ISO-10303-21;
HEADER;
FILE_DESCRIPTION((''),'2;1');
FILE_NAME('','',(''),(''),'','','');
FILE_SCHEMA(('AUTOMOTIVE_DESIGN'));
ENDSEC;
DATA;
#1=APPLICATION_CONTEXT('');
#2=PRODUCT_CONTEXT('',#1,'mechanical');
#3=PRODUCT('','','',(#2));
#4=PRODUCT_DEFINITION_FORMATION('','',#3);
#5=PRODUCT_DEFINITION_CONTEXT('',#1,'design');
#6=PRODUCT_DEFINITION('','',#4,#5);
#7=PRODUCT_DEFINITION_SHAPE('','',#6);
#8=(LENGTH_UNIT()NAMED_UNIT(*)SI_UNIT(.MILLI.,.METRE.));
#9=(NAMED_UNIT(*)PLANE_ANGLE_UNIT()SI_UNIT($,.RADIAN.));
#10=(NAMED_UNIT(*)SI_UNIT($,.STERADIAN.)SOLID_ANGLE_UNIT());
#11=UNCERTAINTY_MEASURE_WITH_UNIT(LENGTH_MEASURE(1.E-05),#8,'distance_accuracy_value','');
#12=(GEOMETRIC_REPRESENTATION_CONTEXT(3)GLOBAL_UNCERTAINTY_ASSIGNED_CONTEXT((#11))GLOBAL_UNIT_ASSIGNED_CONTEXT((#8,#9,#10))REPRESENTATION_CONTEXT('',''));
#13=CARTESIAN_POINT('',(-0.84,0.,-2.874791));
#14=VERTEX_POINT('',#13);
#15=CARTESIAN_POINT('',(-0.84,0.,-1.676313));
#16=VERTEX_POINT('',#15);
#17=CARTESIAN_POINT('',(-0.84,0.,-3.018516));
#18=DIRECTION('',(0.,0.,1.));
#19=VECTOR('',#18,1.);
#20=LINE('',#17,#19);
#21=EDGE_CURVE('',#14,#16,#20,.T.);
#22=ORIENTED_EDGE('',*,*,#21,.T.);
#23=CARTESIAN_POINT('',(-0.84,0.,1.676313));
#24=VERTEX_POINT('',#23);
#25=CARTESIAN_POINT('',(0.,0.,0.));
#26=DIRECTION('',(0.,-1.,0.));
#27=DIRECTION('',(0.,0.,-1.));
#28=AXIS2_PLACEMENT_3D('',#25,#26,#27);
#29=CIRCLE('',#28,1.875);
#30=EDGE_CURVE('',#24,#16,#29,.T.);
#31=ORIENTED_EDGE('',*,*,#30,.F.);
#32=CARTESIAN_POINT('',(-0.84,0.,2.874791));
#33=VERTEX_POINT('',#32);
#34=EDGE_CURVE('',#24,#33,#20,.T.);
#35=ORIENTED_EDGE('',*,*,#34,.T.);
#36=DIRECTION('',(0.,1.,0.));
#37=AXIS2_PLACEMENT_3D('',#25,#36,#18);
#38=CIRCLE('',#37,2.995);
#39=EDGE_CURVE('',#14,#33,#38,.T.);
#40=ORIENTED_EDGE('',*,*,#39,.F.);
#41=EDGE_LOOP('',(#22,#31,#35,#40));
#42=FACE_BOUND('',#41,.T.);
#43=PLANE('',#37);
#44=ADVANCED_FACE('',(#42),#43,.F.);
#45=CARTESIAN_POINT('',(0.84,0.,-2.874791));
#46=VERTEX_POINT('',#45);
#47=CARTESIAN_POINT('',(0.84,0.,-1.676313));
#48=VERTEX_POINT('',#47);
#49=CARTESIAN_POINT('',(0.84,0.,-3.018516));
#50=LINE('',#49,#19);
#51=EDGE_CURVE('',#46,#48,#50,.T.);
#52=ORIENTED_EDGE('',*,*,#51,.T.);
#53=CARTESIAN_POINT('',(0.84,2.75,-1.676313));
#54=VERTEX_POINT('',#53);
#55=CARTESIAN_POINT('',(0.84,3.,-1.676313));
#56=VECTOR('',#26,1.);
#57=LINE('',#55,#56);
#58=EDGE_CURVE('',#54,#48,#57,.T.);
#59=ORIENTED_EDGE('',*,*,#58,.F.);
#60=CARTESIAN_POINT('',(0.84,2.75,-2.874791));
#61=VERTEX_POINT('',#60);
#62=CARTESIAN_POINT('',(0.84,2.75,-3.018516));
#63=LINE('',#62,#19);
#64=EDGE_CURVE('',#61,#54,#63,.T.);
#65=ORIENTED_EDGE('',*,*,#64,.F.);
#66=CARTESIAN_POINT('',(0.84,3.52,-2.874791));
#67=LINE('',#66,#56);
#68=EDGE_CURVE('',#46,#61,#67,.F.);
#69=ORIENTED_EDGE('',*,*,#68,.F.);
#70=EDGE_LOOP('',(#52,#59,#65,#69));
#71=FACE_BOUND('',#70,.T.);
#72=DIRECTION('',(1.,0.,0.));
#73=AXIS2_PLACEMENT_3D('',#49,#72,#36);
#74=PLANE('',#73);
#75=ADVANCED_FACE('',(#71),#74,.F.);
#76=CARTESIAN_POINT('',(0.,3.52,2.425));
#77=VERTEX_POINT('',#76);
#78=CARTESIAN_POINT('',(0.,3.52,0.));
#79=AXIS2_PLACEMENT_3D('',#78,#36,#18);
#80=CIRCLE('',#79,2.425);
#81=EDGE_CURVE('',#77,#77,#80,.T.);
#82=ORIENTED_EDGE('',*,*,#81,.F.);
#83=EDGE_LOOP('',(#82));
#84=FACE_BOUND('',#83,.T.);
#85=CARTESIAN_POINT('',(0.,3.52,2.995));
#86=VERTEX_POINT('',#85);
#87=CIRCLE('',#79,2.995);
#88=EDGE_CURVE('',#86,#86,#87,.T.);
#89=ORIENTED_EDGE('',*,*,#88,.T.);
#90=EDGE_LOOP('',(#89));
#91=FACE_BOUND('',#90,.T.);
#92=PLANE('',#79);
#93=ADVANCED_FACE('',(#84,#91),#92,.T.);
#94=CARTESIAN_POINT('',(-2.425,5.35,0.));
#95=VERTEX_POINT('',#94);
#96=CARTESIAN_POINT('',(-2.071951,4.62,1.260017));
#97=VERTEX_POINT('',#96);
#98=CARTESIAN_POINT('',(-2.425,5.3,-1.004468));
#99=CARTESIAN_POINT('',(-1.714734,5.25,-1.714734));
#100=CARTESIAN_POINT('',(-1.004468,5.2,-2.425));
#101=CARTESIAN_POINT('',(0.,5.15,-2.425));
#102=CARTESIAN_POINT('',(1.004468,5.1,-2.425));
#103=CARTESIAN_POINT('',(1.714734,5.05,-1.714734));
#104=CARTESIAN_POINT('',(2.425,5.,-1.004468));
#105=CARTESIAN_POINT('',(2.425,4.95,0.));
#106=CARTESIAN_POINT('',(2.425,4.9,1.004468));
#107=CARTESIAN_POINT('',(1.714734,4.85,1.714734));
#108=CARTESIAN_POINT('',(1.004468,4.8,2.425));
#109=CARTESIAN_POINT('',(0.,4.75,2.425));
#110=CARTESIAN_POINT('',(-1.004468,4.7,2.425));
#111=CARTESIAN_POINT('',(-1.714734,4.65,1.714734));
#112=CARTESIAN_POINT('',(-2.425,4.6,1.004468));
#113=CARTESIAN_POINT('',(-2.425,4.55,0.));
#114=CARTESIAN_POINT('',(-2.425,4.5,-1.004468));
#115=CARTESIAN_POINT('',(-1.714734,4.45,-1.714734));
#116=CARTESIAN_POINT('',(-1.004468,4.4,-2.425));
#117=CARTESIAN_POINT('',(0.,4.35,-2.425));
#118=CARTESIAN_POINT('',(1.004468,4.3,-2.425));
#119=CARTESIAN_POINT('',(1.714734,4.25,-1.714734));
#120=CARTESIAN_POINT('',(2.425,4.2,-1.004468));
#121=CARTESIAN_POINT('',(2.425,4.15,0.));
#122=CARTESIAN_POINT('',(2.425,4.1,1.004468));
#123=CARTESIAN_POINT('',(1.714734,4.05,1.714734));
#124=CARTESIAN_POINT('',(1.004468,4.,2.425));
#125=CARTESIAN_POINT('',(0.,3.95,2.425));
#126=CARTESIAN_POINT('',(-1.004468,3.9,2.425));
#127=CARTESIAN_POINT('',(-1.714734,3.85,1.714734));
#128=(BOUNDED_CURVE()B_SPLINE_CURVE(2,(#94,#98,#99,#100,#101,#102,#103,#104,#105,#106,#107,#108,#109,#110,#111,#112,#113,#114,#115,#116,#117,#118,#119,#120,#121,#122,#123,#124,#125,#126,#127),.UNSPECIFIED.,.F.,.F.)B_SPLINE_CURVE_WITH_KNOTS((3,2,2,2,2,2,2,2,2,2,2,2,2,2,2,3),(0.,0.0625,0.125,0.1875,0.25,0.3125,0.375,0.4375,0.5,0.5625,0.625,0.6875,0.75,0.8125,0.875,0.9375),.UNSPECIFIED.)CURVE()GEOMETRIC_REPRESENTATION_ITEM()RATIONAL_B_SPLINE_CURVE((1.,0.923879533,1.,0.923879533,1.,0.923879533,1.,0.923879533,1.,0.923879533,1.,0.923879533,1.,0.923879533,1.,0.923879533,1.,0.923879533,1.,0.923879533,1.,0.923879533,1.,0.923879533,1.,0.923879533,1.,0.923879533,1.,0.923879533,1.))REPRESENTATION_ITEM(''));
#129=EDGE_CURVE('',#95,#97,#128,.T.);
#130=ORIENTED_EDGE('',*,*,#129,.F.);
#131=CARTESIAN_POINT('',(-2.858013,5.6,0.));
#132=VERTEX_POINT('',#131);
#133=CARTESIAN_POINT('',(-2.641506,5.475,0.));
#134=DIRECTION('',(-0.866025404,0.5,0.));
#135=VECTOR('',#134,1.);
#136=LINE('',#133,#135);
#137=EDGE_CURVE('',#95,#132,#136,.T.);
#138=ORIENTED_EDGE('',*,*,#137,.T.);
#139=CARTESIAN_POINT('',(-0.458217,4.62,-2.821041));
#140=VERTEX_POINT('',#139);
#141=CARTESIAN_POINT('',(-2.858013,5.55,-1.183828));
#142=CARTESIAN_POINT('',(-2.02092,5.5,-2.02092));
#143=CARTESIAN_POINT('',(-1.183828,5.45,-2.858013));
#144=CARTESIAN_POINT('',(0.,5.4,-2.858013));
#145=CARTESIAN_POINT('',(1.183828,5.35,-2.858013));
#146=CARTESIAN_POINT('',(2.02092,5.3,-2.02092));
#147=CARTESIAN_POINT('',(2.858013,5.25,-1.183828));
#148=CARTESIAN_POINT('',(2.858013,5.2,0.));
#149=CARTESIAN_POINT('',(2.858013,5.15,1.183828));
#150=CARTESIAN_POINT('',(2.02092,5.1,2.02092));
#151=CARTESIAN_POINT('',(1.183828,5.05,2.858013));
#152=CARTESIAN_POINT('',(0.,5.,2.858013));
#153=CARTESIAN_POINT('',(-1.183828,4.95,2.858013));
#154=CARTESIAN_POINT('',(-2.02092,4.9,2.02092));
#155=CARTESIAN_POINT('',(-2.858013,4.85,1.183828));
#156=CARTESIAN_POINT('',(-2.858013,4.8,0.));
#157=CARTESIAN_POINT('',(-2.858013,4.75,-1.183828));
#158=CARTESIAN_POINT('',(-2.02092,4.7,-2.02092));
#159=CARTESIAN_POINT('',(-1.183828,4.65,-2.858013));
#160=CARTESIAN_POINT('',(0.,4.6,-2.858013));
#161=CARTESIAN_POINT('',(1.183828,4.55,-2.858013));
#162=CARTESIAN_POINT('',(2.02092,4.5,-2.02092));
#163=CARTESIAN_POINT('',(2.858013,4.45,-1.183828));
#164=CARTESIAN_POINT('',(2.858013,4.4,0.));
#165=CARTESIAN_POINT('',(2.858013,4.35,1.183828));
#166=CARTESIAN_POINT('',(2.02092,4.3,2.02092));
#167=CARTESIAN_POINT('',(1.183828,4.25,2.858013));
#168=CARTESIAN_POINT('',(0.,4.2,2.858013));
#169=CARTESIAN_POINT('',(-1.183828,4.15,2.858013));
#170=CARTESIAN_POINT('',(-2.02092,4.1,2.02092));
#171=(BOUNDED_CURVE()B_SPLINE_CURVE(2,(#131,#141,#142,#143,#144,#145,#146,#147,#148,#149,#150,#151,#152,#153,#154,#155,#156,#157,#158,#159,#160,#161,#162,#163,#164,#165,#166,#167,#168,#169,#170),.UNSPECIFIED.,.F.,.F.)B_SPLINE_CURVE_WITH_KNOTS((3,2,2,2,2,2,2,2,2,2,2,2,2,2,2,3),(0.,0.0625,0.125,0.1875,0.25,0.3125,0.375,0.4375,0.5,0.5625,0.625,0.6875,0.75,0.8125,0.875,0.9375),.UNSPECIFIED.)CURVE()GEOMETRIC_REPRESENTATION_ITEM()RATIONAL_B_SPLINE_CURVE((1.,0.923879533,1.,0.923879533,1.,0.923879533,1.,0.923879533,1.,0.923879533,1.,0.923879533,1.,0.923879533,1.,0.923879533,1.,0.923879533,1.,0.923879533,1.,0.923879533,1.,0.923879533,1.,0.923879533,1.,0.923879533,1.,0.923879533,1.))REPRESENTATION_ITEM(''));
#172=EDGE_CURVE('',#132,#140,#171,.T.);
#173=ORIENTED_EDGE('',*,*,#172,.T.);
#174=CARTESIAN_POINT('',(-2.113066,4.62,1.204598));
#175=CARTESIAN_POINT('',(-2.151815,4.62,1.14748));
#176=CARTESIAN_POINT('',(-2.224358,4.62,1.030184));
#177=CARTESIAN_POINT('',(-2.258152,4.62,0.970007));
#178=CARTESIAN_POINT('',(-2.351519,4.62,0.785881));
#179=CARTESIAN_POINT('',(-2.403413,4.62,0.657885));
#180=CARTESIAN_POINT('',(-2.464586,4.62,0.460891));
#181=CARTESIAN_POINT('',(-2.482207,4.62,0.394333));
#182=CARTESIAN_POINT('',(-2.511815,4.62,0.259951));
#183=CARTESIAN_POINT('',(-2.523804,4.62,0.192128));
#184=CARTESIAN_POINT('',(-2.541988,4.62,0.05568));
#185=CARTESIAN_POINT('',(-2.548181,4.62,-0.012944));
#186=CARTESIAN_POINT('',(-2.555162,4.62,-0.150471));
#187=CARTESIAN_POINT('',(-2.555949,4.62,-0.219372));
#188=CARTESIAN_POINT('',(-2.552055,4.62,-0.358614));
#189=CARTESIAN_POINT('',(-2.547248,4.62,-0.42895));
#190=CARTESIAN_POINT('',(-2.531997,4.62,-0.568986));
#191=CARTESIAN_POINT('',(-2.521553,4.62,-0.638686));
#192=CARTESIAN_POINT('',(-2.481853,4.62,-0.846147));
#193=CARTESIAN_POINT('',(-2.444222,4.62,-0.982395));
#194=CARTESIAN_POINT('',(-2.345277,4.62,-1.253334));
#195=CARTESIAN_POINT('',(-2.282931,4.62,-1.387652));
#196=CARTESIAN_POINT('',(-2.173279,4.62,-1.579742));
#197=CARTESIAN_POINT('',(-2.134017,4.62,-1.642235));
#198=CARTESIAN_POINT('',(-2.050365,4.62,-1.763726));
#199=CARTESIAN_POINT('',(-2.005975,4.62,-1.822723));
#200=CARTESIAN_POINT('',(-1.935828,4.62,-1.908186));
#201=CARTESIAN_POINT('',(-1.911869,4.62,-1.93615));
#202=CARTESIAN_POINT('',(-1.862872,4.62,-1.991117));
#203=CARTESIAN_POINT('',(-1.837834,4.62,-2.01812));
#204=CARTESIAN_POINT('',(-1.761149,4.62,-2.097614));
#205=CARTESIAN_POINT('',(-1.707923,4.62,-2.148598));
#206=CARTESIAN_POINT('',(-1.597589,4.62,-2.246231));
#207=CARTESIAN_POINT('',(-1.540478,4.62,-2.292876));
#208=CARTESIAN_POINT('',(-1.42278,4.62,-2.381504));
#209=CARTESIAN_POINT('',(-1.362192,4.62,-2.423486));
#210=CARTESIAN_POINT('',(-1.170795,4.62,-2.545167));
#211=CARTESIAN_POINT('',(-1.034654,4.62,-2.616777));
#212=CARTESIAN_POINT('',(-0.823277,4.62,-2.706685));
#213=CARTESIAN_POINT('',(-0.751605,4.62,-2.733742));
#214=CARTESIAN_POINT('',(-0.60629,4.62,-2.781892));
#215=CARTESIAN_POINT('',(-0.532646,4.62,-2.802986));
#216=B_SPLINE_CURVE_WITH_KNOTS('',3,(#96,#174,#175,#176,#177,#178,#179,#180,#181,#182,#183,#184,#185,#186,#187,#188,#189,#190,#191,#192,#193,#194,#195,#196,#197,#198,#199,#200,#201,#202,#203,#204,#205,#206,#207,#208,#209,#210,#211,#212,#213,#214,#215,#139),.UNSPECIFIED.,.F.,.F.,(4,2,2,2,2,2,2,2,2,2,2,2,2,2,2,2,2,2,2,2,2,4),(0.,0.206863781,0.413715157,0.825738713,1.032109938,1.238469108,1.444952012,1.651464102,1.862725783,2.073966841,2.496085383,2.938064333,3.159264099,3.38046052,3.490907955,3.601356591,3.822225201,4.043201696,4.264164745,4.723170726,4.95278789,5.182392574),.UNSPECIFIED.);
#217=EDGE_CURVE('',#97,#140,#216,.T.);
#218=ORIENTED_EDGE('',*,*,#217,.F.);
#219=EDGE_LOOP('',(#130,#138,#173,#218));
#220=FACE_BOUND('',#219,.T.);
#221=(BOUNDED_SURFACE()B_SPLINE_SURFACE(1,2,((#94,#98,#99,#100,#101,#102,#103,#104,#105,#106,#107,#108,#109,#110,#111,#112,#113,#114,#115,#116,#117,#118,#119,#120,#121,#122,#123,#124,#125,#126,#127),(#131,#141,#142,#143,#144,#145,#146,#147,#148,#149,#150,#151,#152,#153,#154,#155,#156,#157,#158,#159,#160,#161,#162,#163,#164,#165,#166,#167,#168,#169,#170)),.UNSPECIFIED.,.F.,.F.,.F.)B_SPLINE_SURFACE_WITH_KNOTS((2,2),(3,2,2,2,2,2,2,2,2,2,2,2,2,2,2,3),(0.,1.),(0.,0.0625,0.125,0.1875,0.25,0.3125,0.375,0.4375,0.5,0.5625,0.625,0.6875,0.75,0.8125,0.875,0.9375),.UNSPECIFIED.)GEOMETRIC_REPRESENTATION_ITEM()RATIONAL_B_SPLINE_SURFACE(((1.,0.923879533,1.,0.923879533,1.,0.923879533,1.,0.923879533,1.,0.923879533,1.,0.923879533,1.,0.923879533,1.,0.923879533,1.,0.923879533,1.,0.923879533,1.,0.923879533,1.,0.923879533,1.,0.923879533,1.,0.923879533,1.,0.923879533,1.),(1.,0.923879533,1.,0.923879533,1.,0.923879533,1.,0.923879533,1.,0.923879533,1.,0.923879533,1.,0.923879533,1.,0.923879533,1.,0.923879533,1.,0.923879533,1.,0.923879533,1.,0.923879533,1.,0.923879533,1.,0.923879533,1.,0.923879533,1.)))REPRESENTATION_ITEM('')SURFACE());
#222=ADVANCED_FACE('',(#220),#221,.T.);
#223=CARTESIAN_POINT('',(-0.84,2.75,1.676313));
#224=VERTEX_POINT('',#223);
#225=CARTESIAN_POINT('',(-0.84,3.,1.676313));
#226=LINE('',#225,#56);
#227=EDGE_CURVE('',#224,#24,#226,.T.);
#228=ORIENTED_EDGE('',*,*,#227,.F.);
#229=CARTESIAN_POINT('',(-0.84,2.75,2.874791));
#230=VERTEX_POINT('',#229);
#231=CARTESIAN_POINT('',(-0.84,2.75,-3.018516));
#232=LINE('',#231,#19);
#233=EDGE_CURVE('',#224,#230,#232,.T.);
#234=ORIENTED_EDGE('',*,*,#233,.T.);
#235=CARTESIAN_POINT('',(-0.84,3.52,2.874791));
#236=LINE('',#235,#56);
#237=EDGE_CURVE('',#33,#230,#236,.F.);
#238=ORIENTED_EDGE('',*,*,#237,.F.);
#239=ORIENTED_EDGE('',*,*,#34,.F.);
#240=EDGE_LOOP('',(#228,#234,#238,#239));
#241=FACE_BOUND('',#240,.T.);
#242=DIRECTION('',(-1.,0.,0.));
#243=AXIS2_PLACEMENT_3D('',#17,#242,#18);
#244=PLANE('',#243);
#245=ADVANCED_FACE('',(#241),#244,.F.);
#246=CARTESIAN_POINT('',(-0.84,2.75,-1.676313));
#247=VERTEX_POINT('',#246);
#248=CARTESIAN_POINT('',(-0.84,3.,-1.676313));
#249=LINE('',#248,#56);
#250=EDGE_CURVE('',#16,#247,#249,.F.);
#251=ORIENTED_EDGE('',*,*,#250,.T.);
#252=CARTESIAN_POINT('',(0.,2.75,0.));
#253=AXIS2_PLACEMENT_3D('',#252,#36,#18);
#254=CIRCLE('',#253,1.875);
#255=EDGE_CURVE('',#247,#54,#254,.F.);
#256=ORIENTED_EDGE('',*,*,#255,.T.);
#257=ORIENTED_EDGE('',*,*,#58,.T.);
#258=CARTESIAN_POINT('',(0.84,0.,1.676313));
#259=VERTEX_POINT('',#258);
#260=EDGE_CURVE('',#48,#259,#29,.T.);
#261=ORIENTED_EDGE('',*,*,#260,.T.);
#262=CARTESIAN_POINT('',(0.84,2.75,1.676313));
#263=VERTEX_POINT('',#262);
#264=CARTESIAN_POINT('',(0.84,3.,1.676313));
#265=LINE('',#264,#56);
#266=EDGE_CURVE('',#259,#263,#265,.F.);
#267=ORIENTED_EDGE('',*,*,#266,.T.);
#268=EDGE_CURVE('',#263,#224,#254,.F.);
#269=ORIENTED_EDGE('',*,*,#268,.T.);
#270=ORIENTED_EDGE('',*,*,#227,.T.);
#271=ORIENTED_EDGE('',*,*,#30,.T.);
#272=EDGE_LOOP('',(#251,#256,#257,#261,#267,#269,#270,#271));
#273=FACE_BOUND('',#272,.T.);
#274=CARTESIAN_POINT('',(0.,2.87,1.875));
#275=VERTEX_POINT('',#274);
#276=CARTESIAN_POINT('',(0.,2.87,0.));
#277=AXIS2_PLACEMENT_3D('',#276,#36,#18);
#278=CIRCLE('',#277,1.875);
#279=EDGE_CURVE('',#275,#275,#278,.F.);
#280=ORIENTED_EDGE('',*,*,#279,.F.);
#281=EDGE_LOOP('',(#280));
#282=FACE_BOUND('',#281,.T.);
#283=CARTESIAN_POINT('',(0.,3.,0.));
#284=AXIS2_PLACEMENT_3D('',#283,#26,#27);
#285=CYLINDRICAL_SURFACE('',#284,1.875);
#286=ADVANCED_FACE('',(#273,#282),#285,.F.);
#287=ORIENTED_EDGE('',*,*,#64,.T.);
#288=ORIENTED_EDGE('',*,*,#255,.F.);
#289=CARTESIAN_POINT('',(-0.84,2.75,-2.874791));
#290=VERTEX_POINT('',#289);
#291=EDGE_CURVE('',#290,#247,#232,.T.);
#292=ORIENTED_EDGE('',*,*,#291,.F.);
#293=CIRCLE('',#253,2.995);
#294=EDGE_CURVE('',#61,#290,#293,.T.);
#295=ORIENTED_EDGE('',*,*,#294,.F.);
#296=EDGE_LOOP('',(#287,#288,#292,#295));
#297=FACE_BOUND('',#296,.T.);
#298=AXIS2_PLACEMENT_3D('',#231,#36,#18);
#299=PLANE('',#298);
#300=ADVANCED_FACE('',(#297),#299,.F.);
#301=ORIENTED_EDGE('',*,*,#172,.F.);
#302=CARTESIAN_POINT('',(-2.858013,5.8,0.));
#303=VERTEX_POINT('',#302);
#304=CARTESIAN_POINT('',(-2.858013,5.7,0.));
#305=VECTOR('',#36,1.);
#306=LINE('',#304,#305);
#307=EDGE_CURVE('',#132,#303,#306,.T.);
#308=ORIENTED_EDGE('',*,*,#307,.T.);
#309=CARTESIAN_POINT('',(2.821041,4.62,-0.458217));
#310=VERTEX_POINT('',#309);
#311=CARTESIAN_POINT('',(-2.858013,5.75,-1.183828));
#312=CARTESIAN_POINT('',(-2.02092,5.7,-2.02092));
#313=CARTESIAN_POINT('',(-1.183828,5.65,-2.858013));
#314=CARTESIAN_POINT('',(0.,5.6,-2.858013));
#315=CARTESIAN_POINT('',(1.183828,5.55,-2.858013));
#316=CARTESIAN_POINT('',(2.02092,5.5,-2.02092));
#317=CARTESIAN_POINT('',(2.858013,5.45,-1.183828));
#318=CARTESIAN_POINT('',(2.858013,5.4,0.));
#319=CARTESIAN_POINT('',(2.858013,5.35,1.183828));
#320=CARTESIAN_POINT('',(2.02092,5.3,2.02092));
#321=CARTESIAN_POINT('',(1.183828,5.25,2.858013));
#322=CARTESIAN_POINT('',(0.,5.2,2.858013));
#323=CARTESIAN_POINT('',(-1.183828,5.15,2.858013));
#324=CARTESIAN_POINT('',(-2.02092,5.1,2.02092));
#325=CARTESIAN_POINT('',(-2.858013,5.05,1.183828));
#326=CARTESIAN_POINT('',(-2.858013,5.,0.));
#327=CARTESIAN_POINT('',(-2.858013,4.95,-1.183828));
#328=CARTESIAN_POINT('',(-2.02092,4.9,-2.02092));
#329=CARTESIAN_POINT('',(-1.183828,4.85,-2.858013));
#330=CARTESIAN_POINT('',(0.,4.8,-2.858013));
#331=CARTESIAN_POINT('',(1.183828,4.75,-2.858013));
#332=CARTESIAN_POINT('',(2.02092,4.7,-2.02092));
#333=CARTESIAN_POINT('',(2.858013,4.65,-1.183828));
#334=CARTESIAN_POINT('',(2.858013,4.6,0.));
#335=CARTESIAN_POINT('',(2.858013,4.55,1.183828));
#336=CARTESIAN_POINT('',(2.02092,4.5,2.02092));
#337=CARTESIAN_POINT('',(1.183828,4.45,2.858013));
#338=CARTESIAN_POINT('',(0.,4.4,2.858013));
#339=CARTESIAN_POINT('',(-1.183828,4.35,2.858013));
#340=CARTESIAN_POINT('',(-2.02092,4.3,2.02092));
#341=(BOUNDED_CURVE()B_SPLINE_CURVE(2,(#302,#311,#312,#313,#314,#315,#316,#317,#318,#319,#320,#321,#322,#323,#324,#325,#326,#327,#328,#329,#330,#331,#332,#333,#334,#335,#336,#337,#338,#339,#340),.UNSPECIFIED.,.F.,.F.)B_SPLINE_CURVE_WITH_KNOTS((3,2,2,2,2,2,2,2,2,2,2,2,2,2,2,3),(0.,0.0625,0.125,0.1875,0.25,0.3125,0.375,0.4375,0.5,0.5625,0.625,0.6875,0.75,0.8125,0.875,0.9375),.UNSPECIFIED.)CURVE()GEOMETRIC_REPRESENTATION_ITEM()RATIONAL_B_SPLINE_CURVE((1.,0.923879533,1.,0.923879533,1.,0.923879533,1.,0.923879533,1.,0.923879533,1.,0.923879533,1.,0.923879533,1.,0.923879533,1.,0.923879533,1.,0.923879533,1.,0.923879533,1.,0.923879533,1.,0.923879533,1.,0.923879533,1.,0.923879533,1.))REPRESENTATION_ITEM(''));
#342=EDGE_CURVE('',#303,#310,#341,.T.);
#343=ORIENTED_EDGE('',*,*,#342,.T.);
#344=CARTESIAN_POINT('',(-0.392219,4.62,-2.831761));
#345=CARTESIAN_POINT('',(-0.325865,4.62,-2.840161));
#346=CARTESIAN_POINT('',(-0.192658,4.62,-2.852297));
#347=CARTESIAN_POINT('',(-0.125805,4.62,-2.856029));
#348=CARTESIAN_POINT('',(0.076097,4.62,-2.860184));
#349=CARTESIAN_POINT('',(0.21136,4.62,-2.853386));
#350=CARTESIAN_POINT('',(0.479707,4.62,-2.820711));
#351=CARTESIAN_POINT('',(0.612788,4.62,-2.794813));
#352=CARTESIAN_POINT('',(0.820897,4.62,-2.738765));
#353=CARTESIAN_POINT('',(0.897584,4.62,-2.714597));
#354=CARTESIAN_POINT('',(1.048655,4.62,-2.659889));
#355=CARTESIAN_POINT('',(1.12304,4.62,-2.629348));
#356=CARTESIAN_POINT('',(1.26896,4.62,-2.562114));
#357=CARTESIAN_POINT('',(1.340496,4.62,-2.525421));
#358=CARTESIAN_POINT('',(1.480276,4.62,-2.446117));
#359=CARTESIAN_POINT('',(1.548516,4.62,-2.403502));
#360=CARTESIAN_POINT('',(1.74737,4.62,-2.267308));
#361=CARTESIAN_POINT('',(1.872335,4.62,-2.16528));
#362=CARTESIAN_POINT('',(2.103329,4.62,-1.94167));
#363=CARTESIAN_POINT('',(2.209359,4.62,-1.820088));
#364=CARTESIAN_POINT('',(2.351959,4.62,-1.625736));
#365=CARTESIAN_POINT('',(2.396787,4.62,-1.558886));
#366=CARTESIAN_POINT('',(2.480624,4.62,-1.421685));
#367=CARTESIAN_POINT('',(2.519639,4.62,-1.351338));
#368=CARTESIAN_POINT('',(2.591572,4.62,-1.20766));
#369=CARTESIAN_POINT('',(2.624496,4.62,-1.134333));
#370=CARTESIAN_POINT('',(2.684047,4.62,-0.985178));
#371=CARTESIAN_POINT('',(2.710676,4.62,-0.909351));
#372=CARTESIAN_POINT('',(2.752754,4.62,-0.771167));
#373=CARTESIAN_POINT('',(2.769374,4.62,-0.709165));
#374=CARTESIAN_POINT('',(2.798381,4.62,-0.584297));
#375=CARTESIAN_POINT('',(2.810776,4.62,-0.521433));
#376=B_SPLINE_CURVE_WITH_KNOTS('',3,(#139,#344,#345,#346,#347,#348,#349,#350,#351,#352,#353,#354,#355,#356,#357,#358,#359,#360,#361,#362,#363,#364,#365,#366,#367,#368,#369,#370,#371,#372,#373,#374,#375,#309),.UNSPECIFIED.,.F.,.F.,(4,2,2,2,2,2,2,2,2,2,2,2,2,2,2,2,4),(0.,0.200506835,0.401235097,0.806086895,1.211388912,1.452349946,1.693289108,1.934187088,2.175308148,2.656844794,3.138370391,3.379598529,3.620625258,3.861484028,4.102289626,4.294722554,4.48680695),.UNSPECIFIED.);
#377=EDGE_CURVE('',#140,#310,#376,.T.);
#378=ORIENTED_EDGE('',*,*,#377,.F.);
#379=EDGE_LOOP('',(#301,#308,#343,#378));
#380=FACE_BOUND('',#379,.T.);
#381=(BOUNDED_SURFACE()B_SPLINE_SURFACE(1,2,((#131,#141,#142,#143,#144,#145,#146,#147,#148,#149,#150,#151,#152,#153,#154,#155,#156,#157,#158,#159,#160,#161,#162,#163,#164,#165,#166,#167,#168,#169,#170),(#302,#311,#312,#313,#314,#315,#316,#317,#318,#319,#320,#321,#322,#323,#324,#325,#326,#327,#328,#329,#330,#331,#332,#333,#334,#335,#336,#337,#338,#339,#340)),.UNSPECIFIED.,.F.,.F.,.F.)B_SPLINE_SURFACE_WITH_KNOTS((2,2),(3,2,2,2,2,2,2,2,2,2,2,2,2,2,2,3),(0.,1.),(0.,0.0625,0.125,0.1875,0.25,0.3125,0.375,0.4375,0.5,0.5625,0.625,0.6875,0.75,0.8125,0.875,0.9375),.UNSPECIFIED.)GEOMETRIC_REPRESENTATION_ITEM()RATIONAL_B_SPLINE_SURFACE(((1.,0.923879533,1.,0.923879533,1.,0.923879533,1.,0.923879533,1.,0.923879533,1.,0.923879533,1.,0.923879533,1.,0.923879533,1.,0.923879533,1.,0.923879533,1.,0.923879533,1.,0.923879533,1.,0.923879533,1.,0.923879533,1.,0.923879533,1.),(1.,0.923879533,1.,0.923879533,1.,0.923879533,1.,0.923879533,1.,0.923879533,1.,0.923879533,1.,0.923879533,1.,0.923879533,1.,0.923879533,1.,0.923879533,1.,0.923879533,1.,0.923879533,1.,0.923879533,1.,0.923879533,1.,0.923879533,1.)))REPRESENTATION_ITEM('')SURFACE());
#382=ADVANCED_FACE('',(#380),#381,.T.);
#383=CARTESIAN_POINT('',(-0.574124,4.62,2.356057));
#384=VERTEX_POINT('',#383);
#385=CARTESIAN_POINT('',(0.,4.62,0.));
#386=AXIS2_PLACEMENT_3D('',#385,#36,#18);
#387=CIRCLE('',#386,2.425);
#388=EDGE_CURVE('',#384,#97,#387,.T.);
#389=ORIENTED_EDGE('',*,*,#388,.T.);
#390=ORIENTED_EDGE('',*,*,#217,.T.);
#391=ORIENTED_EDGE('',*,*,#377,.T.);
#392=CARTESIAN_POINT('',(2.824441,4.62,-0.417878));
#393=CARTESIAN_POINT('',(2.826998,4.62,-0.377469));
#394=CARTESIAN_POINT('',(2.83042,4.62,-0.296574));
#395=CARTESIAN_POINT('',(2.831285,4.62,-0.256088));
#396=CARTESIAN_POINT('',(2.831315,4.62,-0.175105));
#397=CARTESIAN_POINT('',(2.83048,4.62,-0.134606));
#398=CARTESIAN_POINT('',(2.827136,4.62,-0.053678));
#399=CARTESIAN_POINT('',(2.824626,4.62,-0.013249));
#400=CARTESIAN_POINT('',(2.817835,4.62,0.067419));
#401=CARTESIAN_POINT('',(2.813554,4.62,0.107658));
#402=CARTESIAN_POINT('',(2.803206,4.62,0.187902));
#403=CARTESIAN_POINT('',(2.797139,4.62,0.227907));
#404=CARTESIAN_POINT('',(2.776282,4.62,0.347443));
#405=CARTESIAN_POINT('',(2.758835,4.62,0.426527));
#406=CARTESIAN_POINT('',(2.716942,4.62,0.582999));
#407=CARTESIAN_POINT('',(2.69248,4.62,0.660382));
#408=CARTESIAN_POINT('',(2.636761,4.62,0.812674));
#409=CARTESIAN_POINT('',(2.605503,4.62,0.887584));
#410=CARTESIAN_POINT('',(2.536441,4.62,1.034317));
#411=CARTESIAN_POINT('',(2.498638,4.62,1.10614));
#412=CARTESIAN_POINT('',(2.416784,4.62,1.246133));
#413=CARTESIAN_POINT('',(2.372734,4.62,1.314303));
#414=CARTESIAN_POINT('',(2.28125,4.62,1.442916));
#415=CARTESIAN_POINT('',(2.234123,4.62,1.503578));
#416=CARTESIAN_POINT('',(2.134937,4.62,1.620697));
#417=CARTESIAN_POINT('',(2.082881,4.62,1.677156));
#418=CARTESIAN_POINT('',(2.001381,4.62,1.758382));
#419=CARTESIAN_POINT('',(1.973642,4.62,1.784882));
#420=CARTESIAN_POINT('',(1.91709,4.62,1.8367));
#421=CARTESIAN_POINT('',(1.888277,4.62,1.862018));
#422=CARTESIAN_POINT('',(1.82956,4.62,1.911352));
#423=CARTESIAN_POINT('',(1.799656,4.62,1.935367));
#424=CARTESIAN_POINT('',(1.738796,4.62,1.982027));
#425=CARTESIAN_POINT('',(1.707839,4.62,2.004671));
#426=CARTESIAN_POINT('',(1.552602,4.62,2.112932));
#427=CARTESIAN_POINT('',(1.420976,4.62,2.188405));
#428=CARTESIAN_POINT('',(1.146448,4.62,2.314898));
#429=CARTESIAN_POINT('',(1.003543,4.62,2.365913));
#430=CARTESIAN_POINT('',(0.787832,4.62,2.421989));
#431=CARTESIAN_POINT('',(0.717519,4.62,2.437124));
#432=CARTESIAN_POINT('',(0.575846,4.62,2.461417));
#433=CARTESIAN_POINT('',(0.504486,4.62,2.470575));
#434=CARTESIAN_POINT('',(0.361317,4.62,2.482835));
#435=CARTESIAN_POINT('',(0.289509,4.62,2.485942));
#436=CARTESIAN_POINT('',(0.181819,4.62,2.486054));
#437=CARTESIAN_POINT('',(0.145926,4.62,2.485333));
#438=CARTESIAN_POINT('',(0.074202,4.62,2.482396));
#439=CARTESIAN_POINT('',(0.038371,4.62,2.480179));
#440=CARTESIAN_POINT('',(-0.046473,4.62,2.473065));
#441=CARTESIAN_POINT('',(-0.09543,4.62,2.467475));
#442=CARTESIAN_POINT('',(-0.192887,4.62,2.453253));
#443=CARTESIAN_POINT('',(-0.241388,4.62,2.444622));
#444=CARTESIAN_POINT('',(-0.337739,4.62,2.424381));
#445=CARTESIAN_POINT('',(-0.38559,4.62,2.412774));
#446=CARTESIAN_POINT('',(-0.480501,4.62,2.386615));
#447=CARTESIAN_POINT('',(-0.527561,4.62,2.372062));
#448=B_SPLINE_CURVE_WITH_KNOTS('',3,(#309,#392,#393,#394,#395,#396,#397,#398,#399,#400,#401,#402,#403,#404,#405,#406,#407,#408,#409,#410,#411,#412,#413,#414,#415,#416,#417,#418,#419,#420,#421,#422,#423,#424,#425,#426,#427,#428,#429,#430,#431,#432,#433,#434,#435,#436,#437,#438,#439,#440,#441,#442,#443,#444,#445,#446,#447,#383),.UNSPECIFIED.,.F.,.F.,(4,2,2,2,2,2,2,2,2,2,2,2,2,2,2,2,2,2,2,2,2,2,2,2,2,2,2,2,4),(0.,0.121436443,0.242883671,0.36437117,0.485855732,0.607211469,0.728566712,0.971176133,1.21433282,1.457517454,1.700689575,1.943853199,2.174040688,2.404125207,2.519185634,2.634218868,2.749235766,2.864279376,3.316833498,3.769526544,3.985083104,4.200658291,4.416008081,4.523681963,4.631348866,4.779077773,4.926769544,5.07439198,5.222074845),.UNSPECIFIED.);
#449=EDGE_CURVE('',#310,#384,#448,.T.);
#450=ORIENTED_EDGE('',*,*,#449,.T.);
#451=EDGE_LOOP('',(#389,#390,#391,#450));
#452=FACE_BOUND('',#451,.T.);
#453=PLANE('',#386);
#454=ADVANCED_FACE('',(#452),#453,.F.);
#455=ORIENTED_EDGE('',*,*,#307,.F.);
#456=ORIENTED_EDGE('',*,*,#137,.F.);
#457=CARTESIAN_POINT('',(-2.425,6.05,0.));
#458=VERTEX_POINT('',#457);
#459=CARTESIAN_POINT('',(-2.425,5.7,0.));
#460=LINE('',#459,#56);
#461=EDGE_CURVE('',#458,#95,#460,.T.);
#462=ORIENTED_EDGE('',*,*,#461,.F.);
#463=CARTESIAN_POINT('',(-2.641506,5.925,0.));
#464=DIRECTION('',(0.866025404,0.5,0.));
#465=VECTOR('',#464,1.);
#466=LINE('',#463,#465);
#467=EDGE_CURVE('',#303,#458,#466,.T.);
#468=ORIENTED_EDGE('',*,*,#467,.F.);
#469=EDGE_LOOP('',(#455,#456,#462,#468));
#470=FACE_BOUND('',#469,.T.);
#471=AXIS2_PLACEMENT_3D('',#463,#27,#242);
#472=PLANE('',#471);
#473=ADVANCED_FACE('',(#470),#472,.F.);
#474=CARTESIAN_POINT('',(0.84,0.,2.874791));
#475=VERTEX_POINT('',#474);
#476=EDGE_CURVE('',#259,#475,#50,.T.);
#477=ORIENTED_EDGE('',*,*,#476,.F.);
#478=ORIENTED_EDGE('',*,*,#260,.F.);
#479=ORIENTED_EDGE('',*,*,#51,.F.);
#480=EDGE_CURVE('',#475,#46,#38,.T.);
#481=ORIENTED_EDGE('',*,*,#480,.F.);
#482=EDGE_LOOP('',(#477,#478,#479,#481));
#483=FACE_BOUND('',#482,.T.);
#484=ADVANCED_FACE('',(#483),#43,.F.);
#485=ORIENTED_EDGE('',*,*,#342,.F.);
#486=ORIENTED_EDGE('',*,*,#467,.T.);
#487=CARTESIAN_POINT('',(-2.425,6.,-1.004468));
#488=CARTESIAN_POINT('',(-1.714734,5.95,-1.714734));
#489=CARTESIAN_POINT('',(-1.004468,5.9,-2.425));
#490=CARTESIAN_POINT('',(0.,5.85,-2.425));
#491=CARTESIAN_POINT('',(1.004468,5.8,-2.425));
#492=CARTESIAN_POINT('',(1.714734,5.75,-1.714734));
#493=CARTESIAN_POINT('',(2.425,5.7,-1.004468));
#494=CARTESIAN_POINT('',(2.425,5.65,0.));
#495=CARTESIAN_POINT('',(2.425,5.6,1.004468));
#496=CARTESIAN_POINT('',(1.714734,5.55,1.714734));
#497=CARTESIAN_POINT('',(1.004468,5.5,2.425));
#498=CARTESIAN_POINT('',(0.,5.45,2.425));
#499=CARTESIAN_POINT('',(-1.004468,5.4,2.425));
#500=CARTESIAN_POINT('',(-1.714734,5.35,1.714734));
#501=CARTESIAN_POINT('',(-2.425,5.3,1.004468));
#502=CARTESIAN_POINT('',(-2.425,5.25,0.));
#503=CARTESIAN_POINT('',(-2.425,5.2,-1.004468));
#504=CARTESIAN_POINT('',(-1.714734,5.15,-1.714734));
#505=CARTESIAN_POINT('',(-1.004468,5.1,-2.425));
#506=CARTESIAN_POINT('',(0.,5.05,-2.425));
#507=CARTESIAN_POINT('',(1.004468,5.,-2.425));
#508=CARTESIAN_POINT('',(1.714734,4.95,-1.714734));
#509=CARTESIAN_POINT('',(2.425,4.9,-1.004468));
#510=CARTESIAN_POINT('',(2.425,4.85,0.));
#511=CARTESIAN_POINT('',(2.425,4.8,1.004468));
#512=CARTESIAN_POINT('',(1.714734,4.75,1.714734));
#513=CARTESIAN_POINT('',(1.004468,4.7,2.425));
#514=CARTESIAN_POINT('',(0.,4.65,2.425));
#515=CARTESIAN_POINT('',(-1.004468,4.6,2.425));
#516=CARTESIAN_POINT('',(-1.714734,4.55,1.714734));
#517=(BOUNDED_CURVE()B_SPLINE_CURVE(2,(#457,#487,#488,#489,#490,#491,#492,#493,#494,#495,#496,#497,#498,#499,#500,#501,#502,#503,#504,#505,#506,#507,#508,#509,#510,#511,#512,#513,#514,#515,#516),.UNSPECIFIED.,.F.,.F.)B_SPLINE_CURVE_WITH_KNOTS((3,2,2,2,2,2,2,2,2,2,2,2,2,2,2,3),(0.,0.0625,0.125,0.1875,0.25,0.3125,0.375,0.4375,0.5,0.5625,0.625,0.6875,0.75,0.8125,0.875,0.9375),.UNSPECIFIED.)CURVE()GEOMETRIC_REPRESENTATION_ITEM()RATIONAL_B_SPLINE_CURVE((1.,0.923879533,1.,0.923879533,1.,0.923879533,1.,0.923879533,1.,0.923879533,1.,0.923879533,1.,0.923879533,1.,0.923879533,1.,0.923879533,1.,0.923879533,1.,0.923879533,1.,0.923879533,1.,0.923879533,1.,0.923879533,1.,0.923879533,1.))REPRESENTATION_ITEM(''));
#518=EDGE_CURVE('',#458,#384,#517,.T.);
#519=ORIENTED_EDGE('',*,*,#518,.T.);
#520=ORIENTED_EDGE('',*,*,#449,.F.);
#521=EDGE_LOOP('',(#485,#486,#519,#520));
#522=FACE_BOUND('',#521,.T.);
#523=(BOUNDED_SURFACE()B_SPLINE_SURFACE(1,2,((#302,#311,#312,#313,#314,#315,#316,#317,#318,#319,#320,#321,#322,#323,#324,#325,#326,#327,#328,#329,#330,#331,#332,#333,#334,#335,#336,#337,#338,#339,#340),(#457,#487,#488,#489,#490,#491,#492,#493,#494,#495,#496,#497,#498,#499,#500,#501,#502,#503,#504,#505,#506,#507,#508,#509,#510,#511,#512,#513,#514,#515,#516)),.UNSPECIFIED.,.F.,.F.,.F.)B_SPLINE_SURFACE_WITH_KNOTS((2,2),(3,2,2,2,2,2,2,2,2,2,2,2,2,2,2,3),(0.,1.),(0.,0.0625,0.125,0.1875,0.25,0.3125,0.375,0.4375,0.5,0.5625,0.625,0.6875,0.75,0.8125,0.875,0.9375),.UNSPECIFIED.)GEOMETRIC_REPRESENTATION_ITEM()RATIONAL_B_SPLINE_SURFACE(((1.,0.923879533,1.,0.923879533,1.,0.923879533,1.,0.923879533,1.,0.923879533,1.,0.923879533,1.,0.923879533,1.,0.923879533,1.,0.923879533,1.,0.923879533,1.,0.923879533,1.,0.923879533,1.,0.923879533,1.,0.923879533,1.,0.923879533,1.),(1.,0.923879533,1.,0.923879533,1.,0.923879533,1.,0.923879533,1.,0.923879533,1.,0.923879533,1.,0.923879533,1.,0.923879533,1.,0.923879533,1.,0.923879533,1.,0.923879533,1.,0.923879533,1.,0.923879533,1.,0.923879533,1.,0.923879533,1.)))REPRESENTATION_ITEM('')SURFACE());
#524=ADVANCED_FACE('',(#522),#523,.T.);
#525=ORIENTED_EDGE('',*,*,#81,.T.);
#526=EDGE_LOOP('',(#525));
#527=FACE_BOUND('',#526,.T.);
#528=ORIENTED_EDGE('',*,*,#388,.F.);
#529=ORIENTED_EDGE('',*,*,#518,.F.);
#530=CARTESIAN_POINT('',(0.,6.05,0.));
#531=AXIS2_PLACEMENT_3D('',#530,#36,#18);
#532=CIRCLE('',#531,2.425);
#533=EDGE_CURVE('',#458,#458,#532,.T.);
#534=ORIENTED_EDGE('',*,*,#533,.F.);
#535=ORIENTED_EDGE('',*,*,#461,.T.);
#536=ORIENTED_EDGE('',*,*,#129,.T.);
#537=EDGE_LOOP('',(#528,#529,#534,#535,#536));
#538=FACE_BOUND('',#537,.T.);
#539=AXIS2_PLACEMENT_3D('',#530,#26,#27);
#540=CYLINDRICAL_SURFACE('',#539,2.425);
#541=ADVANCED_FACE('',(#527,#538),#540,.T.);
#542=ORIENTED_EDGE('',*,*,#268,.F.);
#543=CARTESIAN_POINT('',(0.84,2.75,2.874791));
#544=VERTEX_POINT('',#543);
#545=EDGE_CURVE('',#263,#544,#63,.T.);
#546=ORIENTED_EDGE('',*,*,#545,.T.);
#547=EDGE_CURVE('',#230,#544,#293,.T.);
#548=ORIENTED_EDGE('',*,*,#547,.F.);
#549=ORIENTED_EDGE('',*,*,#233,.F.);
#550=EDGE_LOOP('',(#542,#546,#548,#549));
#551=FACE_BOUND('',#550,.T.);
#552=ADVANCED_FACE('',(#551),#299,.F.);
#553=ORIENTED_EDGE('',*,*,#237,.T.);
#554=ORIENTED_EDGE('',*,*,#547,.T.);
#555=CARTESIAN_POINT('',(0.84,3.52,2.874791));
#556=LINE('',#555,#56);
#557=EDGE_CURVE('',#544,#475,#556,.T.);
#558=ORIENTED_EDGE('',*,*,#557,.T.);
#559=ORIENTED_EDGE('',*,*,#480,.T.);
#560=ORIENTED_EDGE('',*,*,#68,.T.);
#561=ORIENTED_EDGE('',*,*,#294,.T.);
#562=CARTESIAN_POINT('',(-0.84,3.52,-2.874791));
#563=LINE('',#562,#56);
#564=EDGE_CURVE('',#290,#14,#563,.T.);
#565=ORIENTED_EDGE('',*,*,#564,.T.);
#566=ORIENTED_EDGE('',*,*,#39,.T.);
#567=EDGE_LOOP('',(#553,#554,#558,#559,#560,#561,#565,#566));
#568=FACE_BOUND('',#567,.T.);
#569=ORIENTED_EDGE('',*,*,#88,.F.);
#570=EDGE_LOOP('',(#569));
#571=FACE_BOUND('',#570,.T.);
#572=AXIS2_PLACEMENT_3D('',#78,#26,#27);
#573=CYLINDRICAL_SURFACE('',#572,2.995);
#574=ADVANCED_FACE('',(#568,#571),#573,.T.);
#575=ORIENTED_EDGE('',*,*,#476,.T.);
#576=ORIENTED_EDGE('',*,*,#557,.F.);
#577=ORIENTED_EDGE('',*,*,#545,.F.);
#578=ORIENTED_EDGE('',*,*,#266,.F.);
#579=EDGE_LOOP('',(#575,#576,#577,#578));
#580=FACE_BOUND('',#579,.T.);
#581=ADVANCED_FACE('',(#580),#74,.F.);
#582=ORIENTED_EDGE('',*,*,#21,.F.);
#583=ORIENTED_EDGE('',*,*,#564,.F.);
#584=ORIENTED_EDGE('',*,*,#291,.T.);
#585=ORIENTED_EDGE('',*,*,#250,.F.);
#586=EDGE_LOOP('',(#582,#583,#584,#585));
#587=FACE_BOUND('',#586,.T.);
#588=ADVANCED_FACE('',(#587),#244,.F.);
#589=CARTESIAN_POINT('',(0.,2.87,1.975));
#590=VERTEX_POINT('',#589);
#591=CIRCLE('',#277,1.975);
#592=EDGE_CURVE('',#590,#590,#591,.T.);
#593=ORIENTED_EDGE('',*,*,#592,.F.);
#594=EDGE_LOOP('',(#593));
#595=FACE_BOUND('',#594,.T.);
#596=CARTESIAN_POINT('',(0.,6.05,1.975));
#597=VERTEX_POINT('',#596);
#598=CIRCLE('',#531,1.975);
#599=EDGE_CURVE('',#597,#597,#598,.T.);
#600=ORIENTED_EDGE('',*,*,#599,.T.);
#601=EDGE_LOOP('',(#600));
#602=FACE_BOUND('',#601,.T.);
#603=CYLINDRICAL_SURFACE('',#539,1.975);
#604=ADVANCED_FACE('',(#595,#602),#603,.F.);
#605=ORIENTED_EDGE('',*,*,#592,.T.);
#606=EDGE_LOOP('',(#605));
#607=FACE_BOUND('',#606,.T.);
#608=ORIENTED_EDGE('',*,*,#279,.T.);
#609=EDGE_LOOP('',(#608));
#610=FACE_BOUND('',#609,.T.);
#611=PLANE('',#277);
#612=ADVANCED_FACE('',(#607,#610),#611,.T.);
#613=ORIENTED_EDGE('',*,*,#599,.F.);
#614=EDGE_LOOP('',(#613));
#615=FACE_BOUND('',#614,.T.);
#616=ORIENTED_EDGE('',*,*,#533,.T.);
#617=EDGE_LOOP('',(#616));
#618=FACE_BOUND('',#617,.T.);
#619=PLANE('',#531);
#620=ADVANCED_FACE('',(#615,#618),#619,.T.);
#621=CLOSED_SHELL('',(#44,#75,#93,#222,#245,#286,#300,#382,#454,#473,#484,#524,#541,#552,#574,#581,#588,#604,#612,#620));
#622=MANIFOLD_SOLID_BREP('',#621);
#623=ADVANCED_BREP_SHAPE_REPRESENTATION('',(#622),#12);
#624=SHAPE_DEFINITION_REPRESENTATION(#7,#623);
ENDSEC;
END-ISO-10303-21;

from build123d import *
from build123d.topology import SkipClean

# Parameters (mm, degrees)
SKETCH1_R               = 2.995
BOSS_EXTRUDE1_DEPTH     = 3.52
SKETCH2_R               = 2.425
SKETCH2_R_2             = 1.975
BOSS_EXTRUDE2_DEPTH     = 2.53
THREAD1_PITCH           = 0.8
SKETCH6_R               = 3.05
SKETCH6_R_2             = 2.425
CUT_EXTRUDE1_DEPTH      = 1.1
SKETCH7_R               = 1.875
CUT_EXTRUDE2_DEPTH      = 3
CUT_EXTRUDE4_DEPTH      = 8.385434789
CUT_EXTRUDE4_DEPTH_BACK = 8.385434789
SKETCH9_W               = 1.68
SKETCH9_H               = 2.75
CUT_EXTRUDE6_START      = -3.18
SKETCH10_R              = 1.975
CUT_EXTRUDE6_DEPTH      = 3.18


with BuildPart() as part:
    # Sketch1 → Boss-Extrude1 (new body)
    with BuildSketch(Plane(origin=(0, 0, 0), x_dir=(1, 0, 0), z_dir=(0, 1, 0))):
        with Locations(Location((0, 0, 0), (0, 0, 270))):
            Circle(SKETCH1_R)
    extrude(amount=BOSS_EXTRUDE1_DEPTH)

    # Sketch2 → Boss-Extrude2 (add)
    with BuildSketch(Plane(origin=(0, 3.52, 0), x_dir=(1, 0, 0), z_dir=(0, 1, 0))):
        with Locations(Location((0, 0, 0), (0, 0, 270))):
            Circle(SKETCH2_R)
        with Locations(Location((0, 0, 0), (0, 0, 270))):
            Circle(SKETCH2_R_2, mode=Mode.SUBTRACT)
    extrude(amount=BOSS_EXTRUDE2_DEPTH)

    # Thread1: the profile of Thread Profile1 profile screwed along a right-hand helix of 1.875 turns, 8 arcs to a turn; built about Z, then put on its axis
    thread1_z = Axis((0, 0, 0), (0, 0, 1))
    thread1_corners = [(2.4247, 0, -0.000173205), (2.4247, 0, 0.700173203), (2.8580127, 0, 0.449999999), (2.8580127, 0, 0.249999999)]
    with BuildLine(mode=Mode.PRIVATE) as thread1_profile:
        Line(thread1_corners[0], thread1_corners[1])
        Line(thread1_corners[1], thread1_corners[2])
        Line(thread1_corners[2], thread1_corners[3])
        Line(thread1_corners[3], thread1_corners[0])
    thread1_cap = Face(thread1_profile.wire())
    thread1_turn_angles = [0, 22.5, 45, 67.5, 90, 112.5, 135, 157.5, 180, 202.5, 225, 247.5, 270, 292.5, 315, 337.5, 360]
    thread1_turn_weights = [1, 0.9238795325112867, 1, 0.9238795325112867, 1, 0.9238795325112867, 1, 0.9238795325112867, 1, 0.9238795325112867, 1, 0.9238795325112867, 1, 0.9238795325112867, 1, 0.9238795325112867, 1]
    thread1_turn_rails = [Edge.make_bspline([Vector(p[0], p[1], 0).rotate(thread1_z, thread1_turn_angles[k]) / thread1_turn_weights[k] + Vector(0, 0, p[2] + THREAD1_PITCH * thread1_turn_angles[k] / 360) for k in range(17)], [0, 0, 0, 1, 1, 2, 2, 3, 3, 4, 4, 5, 5, 6, 6, 7, 7, 8, 8, 8], 2, thread1_turn_weights) for p in thread1_corners]
    thread1_turn_sides = [Face.make_surface_from_curves(thread1_turn_rails[p[0]], thread1_turn_rails[p[1]]) for p in [(0, 1), (1, 2), (2, 3), (3, 0)]]
    thread1_last_angles = [360, 382.5, 405, 427.5, 450, 472.5, 495, 517.5, 540, 562.5, 585, 607.5, 630, 652.5, 675]
    thread1_last_weights = [1, 0.9238795325112867, 1, 0.9238795325112867, 1, 0.9238795325112867, 1, 0.9238795325112867, 1, 0.9238795325112867, 1, 0.9238795325112867, 1, 0.9238795325112867, 1]
    thread1_last_rails = [Edge.make_bspline([Vector(p[0], p[1], 0).rotate(thread1_z, thread1_last_angles[k]) / thread1_last_weights[k] + Vector(0, 0, p[2] + THREAD1_PITCH * thread1_last_angles[k] / 360) for k in range(15)], [0, 0, 0, 1, 1, 2, 2, 3, 3, 4, 4, 5, 5, 6, 6, 7, 7, 7], 2, thread1_last_weights) for p in thread1_corners]
    thread1_last_sides = [Face.make_surface_from_curves(thread1_last_rails[p[0]], thread1_last_rails[p[1]]) for p in [(0, 1), (1, 2), (2, 3), (3, 0)]]
    thread1 = Plane(origin=(0, 6.05, 0), x_dir=(-1, 0, 0), z_dir=(0, -1, 0)) * Solid(Shell([*thread1_turn_sides, *thread1_last_sides, thread1_cap, thread1_cap.rotate(thread1_z, 675).moved(Location((0, 0, THREAD1_PITCH * 675 / 360)))]))
    add(thread1)

    # Sketch6 → Cut-Extrude1 (cut)
    with BuildSketch(Plane(origin=(0, 3.52, 0), x_dir=(1, 0, 0), z_dir=(0, 1, 0))):
        Circle(SKETCH6_R)
        with Locations(Location((0, 0, 0), (0, 0, 180))):
            Circle(SKETCH6_R_2, mode=Mode.SUBTRACT)
    extrude(amount=CUT_EXTRUDE1_DEPTH, mode=Mode.SUBTRACT)

    # Sketch7 → Cut-Extrude2 (cut)
    with BuildSketch(Plane.XZ):
        with Locations(Location((0, 0, 0), (0, 0, 270))):
            Circle(SKETCH7_R)
    extrude(amount=-CUT_EXTRUDE2_DEPTH, mode=Mode.SUBTRACT)

    # Sketch9 → Cut-Extrude4 (cut, two sides: drawn at the far end of the back side and taken through both)
    with BuildSketch(Plane.XY.offset(-CUT_EXTRUDE4_DEPTH_BACK)):
        with Locations((0, 1.375)):
            Rectangle(SKETCH9_W, SKETCH9_H)
    extrude(amount=CUT_EXTRUDE4_DEPTH + CUT_EXTRUDE4_DEPTH_BACK, mode=Mode.SUBTRACT)

    # Sketch10 → Cut-Extrude6 (cut)
    with SkipClean():  # the faces are left unmerged after this step: merging them gives an invalid solid
        with BuildSketch(Plane(origin=(0, 6.05, 0), x_dir=(1, 0, 0), z_dir=(0, 1, 0)).offset(CUT_EXTRUDE6_START)):
            with Locations(Location((0, 0, 0), (0, 0, 270))):
                Circle(SKETCH10_R)
        extrude(amount=CUT_EXTRUDE6_DEPTH, mode=Mode.SUBTRACT)


solid = part.part
